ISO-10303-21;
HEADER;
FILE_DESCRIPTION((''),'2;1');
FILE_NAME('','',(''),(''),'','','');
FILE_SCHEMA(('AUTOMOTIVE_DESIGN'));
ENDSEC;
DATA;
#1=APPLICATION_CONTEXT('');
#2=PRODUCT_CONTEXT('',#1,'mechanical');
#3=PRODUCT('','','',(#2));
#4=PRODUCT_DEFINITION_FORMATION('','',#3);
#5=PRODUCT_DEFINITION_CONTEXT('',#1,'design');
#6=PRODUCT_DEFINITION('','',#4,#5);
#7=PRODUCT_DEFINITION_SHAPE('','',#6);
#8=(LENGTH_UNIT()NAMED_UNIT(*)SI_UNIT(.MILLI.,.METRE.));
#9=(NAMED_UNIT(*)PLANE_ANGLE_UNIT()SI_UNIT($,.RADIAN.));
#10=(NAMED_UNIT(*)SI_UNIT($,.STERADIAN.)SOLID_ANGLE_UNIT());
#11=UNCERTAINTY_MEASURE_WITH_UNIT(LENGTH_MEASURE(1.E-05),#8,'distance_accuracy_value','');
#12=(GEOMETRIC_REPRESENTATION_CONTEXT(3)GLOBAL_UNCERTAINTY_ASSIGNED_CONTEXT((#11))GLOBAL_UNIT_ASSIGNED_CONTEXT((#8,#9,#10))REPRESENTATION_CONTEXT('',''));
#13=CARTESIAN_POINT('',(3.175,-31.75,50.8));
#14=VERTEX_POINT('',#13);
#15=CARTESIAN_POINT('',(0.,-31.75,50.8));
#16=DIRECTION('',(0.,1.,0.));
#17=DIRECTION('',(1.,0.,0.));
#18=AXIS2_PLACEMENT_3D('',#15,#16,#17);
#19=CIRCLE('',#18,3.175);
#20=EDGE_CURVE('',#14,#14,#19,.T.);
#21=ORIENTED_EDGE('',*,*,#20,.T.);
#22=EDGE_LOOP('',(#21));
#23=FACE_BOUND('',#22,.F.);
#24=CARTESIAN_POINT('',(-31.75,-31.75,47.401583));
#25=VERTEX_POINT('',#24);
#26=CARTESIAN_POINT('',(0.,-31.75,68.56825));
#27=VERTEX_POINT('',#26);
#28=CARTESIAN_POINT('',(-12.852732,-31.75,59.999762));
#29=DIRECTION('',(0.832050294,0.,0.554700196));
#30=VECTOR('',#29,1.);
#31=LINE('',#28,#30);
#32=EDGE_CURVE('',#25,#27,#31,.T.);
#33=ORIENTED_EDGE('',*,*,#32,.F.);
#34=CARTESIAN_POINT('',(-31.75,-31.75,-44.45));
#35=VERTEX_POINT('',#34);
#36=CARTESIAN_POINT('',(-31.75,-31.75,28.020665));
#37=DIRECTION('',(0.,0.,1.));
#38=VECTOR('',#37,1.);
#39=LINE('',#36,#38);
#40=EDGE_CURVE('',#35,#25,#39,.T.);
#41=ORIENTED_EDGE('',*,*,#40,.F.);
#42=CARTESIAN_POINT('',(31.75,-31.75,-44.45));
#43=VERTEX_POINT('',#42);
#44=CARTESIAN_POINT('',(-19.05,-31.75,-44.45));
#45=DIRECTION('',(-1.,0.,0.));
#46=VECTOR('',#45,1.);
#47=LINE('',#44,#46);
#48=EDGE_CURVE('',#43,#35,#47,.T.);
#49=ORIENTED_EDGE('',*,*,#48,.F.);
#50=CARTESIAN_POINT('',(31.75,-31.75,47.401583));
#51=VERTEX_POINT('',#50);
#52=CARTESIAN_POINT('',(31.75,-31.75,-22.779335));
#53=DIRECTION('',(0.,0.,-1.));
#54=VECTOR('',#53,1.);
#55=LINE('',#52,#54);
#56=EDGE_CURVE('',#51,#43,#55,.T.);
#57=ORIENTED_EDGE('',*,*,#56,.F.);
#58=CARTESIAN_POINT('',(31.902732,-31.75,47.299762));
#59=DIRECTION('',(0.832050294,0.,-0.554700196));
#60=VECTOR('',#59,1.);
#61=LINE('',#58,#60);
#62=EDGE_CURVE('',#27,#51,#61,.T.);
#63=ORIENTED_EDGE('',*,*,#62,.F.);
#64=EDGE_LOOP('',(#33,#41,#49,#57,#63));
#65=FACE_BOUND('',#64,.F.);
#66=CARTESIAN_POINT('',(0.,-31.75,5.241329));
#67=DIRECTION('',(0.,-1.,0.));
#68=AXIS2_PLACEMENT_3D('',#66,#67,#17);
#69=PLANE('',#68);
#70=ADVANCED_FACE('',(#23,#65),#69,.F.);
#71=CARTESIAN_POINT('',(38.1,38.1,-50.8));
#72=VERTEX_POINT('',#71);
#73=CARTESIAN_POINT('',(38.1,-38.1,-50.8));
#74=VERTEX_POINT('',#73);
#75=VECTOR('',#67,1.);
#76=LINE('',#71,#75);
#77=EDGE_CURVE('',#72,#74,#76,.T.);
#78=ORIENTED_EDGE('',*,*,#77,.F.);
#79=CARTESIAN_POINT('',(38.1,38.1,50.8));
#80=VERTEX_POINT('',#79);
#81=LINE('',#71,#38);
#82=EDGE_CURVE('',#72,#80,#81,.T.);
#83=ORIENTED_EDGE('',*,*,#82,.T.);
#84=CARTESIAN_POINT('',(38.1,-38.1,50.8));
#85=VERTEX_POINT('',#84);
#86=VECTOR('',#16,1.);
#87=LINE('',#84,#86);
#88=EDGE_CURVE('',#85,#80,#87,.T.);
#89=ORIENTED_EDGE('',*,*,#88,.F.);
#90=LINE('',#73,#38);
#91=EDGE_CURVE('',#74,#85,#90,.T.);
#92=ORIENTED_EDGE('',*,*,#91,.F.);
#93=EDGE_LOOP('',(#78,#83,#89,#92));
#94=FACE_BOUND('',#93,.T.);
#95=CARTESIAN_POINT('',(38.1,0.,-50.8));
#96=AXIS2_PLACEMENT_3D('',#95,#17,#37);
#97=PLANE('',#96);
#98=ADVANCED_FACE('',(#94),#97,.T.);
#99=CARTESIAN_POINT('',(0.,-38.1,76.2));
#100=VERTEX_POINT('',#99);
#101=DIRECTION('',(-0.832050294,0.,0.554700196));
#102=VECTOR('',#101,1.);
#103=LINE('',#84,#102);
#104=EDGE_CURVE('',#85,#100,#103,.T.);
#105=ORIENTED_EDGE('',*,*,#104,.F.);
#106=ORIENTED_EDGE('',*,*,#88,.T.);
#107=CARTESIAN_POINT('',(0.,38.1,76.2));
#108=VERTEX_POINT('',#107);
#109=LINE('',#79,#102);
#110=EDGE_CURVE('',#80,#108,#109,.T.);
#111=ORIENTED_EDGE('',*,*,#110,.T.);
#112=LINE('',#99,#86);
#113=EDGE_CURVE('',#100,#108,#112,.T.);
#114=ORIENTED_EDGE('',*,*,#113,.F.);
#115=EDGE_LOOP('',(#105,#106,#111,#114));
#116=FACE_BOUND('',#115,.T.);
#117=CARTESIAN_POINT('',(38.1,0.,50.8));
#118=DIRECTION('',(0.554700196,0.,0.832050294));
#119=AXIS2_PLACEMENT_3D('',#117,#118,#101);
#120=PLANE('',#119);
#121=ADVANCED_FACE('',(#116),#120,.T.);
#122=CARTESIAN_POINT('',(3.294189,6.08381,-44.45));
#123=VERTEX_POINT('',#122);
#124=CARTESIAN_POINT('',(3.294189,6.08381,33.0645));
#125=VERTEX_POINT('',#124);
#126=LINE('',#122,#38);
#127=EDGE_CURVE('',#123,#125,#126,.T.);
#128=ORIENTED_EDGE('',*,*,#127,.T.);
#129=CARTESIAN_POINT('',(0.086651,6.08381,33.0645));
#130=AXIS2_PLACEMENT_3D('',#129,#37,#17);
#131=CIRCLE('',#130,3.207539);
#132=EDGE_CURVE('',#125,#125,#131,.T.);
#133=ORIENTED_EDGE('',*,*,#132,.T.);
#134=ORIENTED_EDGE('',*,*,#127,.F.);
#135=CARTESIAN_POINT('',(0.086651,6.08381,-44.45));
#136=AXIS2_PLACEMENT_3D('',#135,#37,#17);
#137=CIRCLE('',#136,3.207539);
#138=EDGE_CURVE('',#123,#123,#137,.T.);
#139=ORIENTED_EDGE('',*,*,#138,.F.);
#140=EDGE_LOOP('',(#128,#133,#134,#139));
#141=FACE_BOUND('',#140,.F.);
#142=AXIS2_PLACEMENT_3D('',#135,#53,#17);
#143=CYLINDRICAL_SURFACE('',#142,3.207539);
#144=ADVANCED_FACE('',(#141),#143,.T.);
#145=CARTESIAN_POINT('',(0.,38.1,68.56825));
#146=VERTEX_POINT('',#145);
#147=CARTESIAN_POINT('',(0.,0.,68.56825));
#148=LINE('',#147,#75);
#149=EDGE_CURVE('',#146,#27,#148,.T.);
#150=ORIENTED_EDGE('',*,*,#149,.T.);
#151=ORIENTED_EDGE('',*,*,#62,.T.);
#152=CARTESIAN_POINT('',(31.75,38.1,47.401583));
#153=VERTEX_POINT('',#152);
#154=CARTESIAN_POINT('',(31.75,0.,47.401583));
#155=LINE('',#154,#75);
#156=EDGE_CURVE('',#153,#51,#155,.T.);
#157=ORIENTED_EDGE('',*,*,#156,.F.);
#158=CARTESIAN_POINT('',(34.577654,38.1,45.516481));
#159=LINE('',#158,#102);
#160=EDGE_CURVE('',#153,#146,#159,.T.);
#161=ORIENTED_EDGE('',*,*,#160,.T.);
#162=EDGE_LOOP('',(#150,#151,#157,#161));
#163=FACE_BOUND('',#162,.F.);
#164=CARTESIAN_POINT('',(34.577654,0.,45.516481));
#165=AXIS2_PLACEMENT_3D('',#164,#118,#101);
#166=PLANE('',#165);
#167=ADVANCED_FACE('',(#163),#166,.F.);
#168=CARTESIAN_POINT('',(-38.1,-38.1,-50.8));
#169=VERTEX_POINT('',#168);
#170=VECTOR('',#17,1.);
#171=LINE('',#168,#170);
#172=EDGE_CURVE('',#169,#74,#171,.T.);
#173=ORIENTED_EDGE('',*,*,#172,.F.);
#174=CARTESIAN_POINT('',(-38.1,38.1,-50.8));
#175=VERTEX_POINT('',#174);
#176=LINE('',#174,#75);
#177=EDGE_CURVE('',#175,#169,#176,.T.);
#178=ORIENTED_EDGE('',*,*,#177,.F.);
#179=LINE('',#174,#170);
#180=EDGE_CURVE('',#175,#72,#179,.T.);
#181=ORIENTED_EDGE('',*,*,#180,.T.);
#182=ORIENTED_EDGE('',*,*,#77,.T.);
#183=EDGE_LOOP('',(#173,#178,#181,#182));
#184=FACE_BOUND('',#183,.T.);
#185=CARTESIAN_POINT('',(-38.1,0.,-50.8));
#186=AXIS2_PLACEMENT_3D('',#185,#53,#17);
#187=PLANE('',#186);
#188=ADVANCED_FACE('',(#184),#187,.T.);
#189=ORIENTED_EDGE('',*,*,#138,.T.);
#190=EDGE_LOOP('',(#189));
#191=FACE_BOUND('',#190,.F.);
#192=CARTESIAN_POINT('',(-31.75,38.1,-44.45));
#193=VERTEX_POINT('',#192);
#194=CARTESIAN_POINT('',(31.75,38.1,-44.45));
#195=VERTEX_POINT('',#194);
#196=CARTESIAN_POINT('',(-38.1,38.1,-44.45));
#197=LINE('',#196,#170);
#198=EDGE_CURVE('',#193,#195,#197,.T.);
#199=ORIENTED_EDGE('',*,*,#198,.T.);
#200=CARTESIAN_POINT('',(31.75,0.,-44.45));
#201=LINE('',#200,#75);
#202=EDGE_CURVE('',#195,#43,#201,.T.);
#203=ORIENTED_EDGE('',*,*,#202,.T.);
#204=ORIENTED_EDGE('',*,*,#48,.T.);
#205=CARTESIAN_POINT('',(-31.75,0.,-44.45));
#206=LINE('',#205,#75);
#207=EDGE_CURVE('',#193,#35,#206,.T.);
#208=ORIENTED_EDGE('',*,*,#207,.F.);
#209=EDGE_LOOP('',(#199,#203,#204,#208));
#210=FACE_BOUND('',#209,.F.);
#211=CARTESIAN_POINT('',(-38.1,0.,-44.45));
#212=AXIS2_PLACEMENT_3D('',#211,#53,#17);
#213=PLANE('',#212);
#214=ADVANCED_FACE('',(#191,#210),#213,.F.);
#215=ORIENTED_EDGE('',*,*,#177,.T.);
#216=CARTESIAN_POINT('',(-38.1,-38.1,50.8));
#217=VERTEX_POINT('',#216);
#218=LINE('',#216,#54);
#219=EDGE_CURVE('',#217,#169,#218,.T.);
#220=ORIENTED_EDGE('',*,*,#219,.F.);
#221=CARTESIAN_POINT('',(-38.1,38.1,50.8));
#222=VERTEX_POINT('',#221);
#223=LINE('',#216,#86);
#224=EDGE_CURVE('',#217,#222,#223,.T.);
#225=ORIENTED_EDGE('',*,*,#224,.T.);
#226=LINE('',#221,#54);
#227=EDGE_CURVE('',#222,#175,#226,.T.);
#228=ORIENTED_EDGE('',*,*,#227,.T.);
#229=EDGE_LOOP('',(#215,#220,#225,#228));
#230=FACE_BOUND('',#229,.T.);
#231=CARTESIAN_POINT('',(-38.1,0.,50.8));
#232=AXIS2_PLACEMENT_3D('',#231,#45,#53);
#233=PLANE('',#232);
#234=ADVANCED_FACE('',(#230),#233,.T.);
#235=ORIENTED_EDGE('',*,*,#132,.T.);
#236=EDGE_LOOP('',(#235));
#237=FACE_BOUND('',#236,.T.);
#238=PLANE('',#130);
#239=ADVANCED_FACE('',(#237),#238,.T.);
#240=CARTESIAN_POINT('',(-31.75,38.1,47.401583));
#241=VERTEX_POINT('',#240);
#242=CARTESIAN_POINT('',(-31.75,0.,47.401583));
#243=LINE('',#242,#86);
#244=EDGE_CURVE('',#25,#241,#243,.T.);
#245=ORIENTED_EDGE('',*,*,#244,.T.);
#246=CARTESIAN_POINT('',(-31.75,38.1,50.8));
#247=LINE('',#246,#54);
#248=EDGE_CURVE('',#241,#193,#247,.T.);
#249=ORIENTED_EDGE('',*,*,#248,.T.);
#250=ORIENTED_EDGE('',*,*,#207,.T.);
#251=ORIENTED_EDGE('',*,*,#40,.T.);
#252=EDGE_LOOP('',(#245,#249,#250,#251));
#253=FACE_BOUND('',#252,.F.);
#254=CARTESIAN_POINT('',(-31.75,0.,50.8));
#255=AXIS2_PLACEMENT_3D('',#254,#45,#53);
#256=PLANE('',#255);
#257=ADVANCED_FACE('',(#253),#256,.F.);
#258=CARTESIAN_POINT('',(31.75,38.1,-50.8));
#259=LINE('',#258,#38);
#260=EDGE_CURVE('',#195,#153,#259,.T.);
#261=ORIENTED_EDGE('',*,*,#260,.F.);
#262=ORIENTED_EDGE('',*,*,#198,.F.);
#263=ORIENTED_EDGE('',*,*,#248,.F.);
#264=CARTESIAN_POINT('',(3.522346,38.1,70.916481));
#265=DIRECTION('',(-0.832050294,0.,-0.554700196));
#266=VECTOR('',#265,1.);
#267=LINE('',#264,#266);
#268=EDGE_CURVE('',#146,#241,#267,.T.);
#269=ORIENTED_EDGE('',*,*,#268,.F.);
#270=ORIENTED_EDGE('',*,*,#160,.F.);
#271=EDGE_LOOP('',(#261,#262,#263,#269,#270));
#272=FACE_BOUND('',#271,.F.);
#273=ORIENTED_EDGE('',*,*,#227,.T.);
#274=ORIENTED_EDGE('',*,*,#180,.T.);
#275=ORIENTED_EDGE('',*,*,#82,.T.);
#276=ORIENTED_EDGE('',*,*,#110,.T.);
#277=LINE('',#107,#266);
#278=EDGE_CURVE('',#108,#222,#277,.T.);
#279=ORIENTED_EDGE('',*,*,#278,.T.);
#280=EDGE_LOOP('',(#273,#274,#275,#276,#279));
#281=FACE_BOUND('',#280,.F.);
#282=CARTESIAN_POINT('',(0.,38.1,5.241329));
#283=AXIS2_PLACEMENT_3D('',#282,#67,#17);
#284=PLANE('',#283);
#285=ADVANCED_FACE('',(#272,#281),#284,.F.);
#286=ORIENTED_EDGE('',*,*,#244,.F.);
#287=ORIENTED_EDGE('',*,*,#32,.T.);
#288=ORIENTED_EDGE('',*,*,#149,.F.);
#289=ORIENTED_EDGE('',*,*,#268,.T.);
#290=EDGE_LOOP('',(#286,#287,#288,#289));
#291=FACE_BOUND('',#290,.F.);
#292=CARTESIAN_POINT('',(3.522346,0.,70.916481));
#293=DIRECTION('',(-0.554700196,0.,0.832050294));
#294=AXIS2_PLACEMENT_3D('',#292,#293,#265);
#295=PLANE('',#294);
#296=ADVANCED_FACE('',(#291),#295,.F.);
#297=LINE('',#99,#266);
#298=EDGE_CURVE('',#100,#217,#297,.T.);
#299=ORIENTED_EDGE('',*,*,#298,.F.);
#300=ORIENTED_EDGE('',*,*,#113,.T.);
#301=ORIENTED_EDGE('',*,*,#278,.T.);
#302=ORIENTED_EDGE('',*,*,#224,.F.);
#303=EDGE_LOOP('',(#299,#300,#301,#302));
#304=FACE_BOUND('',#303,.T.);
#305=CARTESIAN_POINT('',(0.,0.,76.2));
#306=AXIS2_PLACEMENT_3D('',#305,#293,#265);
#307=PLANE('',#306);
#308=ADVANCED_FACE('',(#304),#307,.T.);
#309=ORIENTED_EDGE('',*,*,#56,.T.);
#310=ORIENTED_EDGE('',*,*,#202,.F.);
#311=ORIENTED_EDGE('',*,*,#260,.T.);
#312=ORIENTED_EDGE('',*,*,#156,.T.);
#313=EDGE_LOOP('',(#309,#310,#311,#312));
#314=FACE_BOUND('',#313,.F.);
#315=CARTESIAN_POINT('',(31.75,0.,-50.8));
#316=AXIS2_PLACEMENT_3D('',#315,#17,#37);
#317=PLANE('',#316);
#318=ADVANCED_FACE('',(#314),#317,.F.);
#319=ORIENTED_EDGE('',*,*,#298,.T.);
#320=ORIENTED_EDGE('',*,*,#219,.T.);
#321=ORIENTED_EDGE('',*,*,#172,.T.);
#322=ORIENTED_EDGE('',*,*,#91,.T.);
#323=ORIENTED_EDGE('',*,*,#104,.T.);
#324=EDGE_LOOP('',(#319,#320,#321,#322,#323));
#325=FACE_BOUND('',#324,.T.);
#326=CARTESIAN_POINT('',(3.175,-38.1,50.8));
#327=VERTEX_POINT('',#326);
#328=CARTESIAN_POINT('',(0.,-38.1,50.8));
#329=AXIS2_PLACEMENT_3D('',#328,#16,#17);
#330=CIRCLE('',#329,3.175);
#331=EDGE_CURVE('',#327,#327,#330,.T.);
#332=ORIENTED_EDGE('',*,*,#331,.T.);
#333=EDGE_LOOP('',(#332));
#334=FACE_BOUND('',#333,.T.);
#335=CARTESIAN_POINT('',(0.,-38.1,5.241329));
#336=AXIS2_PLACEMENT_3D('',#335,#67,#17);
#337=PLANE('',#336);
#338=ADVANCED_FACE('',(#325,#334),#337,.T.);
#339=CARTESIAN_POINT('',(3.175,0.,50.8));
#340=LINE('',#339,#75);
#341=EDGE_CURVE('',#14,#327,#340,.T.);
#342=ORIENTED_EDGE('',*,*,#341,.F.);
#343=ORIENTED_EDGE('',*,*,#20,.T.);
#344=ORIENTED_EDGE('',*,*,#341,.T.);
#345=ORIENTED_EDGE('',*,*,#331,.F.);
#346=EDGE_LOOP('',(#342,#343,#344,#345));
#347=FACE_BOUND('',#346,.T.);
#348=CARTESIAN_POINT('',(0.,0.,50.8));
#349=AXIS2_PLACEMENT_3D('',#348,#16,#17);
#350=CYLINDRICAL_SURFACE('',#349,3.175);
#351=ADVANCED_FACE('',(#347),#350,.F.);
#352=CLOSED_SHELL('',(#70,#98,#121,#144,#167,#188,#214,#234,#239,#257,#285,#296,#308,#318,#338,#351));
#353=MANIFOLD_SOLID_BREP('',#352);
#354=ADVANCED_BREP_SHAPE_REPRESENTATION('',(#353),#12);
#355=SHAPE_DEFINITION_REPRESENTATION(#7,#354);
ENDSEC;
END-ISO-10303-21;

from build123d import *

# Parameters (mm, degrees)
F1_DEPTH = 38.1
F2_T     = -6.35
F5_R     = 3.2075388265
F6_DEPTH = 77.5145
F7_R     = 3.175
F8_DEPTH = 38.101


# Not quite as in the source:
# - a feature of the source that left no trace in its solid (it failed there, or was rolled back) is left out
# - the program builds the solid bodies; features that only make, move or delete a surface that nothing else refers to are left out


with BuildPart() as f1:
    # F0 (on Front) → F1 (new body, symmetric)
    with BuildSketch(Plane.XZ):
        Polygon((-38.1, 50.8), (-38.1, -50.8), (38.1, -50.8), (38.1, 50.8), (0, 76.2), align=None)
    extrude(amount=F1_DEPTH, both=True)

    # F2
    f2_openings = [f1.faces().sort_by_distance(p)[0] for p in [
        (0, 38.1, 6.585185),
    ]]
    offset(amount=F2_T, openings=f2_openings)

    # F5 (on face) → F6 (join)
    with BuildSketch(Plane.XY.offset(-44.45)):
        with Locations((0.0866505507, 6.0838097706)):
            Circle(F5_R)
    extrude(amount=F6_DEPTH)

    # F7 (on face) → F8 (cut, through all)
    with BuildSketch(Plane.XZ):
        with Locations((0, 50.8)):
            Circle(F7_R)
    extrude(amount=F8_DEPTH, mode=Mode.SUBTRACT)


solid = f1.part
